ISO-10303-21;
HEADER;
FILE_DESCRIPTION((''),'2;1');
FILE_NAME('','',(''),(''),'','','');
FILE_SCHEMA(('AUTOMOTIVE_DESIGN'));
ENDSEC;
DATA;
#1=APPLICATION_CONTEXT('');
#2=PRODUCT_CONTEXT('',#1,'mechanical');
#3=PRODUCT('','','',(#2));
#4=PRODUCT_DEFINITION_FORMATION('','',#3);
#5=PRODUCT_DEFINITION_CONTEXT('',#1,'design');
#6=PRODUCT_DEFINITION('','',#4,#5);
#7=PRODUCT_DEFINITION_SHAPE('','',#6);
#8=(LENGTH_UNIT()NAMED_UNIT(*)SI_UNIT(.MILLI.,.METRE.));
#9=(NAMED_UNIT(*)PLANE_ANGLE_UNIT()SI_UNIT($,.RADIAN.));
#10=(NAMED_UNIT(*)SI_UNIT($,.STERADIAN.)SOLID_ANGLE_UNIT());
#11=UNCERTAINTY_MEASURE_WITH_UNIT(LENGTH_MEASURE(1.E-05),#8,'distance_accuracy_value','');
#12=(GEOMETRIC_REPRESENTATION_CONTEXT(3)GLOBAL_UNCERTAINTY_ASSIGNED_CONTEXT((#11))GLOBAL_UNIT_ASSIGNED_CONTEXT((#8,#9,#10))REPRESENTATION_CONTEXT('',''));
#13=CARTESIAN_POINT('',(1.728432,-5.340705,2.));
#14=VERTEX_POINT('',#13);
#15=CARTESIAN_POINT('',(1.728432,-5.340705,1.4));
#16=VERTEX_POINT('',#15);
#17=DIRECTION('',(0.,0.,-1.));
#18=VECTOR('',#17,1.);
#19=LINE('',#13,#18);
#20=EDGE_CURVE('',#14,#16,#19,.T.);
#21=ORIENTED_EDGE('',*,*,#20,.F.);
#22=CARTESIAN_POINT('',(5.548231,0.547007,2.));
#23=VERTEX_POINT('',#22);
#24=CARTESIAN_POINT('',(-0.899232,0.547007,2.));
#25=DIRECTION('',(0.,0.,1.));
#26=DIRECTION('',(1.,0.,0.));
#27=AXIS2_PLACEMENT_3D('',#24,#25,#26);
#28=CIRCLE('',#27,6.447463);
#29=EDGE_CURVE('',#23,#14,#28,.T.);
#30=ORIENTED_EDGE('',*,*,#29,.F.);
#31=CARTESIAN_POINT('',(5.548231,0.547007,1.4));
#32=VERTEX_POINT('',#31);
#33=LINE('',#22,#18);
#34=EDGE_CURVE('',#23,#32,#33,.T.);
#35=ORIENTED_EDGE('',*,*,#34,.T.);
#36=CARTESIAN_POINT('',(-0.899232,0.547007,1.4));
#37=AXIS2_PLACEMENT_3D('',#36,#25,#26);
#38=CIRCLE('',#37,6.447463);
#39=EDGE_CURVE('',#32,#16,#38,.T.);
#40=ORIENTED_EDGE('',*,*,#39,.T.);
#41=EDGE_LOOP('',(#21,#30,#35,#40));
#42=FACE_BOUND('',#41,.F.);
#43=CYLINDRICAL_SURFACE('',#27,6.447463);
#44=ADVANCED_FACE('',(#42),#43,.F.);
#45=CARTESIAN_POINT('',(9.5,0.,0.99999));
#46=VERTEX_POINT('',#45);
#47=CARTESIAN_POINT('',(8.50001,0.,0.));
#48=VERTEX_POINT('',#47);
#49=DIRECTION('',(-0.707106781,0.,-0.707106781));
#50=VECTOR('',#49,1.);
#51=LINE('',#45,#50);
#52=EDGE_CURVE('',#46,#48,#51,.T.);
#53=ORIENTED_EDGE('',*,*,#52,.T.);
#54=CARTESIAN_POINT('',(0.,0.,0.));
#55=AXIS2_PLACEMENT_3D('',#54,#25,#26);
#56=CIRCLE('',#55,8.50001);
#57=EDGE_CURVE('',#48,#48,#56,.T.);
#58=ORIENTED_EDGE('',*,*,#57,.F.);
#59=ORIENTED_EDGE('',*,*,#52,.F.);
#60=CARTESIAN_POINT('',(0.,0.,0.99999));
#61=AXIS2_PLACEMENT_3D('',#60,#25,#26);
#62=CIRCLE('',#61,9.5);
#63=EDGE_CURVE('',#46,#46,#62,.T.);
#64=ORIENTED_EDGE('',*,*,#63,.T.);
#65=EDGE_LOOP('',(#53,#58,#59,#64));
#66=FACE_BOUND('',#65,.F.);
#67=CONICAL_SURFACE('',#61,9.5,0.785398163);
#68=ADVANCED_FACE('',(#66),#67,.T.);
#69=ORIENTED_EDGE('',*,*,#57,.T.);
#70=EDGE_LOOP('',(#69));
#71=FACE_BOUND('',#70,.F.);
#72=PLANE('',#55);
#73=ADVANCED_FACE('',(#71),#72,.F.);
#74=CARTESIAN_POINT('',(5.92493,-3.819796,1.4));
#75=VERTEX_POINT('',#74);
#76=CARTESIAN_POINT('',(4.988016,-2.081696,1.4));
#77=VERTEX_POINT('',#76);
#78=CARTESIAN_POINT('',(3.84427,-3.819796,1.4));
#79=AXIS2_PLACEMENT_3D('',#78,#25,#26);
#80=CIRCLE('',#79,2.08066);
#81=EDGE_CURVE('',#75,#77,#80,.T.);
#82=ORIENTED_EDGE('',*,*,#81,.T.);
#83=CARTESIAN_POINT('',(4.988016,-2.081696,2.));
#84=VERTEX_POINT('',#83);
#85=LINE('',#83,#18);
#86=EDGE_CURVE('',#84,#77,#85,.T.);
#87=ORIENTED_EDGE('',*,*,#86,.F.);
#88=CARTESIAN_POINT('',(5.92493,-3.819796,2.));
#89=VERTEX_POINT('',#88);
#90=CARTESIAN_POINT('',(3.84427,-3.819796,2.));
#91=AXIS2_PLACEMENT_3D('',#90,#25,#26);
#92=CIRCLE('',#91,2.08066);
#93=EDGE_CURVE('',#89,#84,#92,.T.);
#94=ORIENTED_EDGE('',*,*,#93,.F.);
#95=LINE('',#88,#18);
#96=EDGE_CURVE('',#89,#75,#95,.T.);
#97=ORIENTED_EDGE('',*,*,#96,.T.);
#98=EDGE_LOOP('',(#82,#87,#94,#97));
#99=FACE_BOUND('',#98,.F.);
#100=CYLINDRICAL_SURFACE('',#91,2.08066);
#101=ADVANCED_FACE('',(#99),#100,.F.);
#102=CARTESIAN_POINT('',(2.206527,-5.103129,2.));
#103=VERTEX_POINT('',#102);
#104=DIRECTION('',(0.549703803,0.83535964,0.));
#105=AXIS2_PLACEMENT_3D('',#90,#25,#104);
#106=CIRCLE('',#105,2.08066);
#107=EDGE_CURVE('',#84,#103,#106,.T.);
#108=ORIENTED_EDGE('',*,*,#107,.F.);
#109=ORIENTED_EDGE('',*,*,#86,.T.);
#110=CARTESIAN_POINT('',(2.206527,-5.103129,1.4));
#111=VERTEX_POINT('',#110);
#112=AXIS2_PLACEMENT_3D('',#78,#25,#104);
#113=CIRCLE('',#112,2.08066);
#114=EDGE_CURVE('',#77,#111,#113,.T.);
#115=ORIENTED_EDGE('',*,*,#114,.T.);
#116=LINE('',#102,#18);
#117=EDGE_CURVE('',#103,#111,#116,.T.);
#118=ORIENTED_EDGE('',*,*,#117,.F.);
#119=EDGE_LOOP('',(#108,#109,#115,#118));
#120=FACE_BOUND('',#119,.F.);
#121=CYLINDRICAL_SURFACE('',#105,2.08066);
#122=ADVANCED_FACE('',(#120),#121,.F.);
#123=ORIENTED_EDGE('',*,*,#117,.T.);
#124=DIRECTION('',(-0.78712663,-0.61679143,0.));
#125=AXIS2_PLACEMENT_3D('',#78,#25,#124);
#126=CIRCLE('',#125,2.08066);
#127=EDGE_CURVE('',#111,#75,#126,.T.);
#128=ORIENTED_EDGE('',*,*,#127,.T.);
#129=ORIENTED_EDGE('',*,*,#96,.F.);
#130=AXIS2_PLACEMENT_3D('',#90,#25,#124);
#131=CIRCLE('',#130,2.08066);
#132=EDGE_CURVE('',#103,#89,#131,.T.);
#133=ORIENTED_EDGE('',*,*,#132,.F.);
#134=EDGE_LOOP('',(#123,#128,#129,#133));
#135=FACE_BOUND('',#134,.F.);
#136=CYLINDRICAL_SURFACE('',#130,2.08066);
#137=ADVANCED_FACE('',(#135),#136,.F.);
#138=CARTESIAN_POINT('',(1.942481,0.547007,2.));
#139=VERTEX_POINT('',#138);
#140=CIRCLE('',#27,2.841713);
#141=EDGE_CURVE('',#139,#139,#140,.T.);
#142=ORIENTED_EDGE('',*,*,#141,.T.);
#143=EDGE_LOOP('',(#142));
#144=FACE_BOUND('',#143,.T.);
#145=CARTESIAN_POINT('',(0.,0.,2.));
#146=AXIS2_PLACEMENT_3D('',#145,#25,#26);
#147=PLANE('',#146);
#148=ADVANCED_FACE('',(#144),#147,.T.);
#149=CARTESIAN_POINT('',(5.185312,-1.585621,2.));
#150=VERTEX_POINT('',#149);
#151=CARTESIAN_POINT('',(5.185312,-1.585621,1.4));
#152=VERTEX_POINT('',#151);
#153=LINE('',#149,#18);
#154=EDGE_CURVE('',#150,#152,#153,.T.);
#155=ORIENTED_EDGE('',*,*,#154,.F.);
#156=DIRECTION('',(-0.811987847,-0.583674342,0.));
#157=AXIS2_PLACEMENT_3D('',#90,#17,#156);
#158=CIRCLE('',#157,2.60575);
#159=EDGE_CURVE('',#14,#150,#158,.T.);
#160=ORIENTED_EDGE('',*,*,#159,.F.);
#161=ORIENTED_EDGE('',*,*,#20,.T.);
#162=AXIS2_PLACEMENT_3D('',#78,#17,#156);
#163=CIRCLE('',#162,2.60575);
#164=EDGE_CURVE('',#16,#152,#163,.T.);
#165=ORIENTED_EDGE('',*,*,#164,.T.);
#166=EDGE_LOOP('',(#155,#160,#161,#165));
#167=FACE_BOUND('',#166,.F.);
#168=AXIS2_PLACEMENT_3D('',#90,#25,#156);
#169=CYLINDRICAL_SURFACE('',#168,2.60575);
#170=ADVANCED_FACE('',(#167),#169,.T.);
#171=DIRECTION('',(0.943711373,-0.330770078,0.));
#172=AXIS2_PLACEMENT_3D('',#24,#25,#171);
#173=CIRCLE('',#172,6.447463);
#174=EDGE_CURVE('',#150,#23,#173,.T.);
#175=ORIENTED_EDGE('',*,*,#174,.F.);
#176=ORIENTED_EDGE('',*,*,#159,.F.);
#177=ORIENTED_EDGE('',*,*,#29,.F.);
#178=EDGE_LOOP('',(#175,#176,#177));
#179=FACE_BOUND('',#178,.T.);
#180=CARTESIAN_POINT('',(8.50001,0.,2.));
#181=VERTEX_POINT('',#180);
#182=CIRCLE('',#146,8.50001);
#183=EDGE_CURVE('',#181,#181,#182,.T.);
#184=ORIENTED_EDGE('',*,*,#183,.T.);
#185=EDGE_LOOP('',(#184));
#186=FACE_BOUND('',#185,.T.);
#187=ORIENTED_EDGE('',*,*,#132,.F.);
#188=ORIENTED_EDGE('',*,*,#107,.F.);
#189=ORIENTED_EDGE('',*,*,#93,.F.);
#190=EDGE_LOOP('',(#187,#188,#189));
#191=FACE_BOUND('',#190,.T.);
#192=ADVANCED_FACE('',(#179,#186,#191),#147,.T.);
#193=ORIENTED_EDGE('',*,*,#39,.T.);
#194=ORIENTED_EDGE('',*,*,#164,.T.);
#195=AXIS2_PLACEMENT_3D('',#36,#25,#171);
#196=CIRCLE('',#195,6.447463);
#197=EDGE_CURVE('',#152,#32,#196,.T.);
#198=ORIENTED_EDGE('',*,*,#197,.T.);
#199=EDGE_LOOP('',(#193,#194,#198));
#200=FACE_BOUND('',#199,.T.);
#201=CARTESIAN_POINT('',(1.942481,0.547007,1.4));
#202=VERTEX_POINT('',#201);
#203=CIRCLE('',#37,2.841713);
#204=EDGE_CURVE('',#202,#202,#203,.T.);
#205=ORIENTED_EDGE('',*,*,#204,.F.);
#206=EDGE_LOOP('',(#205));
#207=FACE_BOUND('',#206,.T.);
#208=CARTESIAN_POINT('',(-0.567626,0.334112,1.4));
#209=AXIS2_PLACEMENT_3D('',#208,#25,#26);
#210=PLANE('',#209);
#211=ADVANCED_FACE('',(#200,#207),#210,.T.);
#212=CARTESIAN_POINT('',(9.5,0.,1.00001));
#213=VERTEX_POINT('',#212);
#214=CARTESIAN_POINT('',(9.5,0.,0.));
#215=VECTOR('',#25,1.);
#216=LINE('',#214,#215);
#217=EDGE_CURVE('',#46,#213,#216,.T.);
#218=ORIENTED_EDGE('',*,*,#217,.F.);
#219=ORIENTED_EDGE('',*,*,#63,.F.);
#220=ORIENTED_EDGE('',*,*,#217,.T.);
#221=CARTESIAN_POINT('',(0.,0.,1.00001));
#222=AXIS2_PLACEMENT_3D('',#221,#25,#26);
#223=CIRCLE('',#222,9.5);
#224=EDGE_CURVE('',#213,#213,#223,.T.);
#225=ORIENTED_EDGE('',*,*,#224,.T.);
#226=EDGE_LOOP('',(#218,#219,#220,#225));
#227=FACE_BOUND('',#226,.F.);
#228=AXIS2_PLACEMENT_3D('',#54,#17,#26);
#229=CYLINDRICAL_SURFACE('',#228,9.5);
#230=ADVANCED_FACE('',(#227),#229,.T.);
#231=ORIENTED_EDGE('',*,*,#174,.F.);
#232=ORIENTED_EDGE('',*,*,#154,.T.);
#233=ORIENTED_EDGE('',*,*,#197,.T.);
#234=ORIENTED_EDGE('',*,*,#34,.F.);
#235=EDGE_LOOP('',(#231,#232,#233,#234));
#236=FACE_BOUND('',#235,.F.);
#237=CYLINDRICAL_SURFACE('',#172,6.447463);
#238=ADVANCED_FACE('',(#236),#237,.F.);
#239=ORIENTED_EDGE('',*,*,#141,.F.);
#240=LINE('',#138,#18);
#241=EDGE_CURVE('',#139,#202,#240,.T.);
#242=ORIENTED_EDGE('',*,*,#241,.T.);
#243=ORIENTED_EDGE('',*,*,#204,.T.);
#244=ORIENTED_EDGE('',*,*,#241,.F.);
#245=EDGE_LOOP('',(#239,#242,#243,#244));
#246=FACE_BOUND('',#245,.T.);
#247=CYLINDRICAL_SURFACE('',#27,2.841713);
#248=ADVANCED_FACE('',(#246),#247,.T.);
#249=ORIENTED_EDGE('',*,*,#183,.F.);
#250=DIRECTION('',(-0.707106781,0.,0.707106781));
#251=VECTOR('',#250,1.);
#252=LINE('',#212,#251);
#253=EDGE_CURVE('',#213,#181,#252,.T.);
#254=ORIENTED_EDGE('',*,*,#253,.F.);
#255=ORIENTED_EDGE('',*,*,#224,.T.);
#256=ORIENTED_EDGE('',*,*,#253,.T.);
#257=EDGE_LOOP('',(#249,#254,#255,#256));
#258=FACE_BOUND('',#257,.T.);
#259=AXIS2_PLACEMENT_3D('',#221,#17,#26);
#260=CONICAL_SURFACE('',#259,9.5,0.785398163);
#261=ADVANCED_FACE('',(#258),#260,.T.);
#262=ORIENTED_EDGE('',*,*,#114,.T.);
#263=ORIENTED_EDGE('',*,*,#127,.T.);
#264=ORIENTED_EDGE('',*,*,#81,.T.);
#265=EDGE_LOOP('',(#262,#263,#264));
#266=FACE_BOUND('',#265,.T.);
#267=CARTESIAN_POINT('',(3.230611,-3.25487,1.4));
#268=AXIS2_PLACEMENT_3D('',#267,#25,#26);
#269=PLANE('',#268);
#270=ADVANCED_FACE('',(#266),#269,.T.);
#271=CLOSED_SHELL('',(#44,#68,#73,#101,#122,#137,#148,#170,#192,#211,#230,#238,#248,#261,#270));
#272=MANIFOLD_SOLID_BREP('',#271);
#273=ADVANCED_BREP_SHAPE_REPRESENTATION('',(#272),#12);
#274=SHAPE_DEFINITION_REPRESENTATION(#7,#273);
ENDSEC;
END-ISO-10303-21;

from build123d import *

# Parameters (mm, degrees)
F0_R     = 9.5
F1_DEPTH = 2
F2_SIZE  = 0.99999
F3_R     = 2.8417127556
F4_DEPTH = 0.6


# Not quite as in the source:
# - a fillet or chamfer is up to 0.001 mm smaller than in the source, because OpenCascade refuses the exact size


with BuildPart() as f1:
    # F0 (on Top) → F1 (new body)
    with BuildSketch(Plane.XY):
        Circle(F0_R)
    extrude(amount=F1_DEPTH)

    # F2 (size 1 in the source; OpenCascade refuses exactly that, so slightly less here)
    f2_edges = [f1.edges().sort_by_distance(p)[0] for p in [
        (-9.5, 0, 2),
        (-9.5, 0, 0),
    ]]
    chamfer(f2_edges, length=F2_SIZE)

    # F3 (on face) → F4 (cut)
    with BuildSketch(Plane.XY.offset(2)):
        with BuildLine():
            ThreePointArc((5.185311865, -1.585620522), (5.4568534532, -0.5346363532), (5.5482306838, 0.5470071919))
            ThreePointArc((5.5482306838, 0.5470071919), (-6.3080923619, 4.0561385788), (1.7284324719, -5.3407049258))
            ThreePointArc((1.7284324719, -5.3407049258), (1.9271777373, -2.0549469321), (5.185311865, -1.585620522))
        make_face()
        with Locations((-0.8992319345, 0.5470071919)):
            Circle(F3_R, mode=Mode.SUBTRACT)
        with BuildLine():
            ThreePointArc((4.9880163164, -2.0816963378), (2.3134948891, -2.4105852235), (2.2065269261, -5.1031287457))
            ThreePointArc((2.2065269261, -5.1031287457), (3.8442696915, -3.8197955903), (4.9880163164, -2.0816963378))
        make_face()
        with BuildLine():
            ThreePointArc((4.9880163164, -2.0816963378), (3.8442696915, -3.8197955903), (2.2065269261, -5.1031287457))
            ThreePointArc((2.2065269261, -5.1031287457), (4.5230773814, -5.7866116654), (5.9249295276, -3.8197955903))
            ThreePointArc((5.9249295276, -3.8197955903), (5.6757845042, -2.8325272153), (4.9880163164, -2.0816963378))
        make_face()
    extrude(amount=-F4_DEPTH, mode=Mode.SUBTRACT)


solid = f1.part
